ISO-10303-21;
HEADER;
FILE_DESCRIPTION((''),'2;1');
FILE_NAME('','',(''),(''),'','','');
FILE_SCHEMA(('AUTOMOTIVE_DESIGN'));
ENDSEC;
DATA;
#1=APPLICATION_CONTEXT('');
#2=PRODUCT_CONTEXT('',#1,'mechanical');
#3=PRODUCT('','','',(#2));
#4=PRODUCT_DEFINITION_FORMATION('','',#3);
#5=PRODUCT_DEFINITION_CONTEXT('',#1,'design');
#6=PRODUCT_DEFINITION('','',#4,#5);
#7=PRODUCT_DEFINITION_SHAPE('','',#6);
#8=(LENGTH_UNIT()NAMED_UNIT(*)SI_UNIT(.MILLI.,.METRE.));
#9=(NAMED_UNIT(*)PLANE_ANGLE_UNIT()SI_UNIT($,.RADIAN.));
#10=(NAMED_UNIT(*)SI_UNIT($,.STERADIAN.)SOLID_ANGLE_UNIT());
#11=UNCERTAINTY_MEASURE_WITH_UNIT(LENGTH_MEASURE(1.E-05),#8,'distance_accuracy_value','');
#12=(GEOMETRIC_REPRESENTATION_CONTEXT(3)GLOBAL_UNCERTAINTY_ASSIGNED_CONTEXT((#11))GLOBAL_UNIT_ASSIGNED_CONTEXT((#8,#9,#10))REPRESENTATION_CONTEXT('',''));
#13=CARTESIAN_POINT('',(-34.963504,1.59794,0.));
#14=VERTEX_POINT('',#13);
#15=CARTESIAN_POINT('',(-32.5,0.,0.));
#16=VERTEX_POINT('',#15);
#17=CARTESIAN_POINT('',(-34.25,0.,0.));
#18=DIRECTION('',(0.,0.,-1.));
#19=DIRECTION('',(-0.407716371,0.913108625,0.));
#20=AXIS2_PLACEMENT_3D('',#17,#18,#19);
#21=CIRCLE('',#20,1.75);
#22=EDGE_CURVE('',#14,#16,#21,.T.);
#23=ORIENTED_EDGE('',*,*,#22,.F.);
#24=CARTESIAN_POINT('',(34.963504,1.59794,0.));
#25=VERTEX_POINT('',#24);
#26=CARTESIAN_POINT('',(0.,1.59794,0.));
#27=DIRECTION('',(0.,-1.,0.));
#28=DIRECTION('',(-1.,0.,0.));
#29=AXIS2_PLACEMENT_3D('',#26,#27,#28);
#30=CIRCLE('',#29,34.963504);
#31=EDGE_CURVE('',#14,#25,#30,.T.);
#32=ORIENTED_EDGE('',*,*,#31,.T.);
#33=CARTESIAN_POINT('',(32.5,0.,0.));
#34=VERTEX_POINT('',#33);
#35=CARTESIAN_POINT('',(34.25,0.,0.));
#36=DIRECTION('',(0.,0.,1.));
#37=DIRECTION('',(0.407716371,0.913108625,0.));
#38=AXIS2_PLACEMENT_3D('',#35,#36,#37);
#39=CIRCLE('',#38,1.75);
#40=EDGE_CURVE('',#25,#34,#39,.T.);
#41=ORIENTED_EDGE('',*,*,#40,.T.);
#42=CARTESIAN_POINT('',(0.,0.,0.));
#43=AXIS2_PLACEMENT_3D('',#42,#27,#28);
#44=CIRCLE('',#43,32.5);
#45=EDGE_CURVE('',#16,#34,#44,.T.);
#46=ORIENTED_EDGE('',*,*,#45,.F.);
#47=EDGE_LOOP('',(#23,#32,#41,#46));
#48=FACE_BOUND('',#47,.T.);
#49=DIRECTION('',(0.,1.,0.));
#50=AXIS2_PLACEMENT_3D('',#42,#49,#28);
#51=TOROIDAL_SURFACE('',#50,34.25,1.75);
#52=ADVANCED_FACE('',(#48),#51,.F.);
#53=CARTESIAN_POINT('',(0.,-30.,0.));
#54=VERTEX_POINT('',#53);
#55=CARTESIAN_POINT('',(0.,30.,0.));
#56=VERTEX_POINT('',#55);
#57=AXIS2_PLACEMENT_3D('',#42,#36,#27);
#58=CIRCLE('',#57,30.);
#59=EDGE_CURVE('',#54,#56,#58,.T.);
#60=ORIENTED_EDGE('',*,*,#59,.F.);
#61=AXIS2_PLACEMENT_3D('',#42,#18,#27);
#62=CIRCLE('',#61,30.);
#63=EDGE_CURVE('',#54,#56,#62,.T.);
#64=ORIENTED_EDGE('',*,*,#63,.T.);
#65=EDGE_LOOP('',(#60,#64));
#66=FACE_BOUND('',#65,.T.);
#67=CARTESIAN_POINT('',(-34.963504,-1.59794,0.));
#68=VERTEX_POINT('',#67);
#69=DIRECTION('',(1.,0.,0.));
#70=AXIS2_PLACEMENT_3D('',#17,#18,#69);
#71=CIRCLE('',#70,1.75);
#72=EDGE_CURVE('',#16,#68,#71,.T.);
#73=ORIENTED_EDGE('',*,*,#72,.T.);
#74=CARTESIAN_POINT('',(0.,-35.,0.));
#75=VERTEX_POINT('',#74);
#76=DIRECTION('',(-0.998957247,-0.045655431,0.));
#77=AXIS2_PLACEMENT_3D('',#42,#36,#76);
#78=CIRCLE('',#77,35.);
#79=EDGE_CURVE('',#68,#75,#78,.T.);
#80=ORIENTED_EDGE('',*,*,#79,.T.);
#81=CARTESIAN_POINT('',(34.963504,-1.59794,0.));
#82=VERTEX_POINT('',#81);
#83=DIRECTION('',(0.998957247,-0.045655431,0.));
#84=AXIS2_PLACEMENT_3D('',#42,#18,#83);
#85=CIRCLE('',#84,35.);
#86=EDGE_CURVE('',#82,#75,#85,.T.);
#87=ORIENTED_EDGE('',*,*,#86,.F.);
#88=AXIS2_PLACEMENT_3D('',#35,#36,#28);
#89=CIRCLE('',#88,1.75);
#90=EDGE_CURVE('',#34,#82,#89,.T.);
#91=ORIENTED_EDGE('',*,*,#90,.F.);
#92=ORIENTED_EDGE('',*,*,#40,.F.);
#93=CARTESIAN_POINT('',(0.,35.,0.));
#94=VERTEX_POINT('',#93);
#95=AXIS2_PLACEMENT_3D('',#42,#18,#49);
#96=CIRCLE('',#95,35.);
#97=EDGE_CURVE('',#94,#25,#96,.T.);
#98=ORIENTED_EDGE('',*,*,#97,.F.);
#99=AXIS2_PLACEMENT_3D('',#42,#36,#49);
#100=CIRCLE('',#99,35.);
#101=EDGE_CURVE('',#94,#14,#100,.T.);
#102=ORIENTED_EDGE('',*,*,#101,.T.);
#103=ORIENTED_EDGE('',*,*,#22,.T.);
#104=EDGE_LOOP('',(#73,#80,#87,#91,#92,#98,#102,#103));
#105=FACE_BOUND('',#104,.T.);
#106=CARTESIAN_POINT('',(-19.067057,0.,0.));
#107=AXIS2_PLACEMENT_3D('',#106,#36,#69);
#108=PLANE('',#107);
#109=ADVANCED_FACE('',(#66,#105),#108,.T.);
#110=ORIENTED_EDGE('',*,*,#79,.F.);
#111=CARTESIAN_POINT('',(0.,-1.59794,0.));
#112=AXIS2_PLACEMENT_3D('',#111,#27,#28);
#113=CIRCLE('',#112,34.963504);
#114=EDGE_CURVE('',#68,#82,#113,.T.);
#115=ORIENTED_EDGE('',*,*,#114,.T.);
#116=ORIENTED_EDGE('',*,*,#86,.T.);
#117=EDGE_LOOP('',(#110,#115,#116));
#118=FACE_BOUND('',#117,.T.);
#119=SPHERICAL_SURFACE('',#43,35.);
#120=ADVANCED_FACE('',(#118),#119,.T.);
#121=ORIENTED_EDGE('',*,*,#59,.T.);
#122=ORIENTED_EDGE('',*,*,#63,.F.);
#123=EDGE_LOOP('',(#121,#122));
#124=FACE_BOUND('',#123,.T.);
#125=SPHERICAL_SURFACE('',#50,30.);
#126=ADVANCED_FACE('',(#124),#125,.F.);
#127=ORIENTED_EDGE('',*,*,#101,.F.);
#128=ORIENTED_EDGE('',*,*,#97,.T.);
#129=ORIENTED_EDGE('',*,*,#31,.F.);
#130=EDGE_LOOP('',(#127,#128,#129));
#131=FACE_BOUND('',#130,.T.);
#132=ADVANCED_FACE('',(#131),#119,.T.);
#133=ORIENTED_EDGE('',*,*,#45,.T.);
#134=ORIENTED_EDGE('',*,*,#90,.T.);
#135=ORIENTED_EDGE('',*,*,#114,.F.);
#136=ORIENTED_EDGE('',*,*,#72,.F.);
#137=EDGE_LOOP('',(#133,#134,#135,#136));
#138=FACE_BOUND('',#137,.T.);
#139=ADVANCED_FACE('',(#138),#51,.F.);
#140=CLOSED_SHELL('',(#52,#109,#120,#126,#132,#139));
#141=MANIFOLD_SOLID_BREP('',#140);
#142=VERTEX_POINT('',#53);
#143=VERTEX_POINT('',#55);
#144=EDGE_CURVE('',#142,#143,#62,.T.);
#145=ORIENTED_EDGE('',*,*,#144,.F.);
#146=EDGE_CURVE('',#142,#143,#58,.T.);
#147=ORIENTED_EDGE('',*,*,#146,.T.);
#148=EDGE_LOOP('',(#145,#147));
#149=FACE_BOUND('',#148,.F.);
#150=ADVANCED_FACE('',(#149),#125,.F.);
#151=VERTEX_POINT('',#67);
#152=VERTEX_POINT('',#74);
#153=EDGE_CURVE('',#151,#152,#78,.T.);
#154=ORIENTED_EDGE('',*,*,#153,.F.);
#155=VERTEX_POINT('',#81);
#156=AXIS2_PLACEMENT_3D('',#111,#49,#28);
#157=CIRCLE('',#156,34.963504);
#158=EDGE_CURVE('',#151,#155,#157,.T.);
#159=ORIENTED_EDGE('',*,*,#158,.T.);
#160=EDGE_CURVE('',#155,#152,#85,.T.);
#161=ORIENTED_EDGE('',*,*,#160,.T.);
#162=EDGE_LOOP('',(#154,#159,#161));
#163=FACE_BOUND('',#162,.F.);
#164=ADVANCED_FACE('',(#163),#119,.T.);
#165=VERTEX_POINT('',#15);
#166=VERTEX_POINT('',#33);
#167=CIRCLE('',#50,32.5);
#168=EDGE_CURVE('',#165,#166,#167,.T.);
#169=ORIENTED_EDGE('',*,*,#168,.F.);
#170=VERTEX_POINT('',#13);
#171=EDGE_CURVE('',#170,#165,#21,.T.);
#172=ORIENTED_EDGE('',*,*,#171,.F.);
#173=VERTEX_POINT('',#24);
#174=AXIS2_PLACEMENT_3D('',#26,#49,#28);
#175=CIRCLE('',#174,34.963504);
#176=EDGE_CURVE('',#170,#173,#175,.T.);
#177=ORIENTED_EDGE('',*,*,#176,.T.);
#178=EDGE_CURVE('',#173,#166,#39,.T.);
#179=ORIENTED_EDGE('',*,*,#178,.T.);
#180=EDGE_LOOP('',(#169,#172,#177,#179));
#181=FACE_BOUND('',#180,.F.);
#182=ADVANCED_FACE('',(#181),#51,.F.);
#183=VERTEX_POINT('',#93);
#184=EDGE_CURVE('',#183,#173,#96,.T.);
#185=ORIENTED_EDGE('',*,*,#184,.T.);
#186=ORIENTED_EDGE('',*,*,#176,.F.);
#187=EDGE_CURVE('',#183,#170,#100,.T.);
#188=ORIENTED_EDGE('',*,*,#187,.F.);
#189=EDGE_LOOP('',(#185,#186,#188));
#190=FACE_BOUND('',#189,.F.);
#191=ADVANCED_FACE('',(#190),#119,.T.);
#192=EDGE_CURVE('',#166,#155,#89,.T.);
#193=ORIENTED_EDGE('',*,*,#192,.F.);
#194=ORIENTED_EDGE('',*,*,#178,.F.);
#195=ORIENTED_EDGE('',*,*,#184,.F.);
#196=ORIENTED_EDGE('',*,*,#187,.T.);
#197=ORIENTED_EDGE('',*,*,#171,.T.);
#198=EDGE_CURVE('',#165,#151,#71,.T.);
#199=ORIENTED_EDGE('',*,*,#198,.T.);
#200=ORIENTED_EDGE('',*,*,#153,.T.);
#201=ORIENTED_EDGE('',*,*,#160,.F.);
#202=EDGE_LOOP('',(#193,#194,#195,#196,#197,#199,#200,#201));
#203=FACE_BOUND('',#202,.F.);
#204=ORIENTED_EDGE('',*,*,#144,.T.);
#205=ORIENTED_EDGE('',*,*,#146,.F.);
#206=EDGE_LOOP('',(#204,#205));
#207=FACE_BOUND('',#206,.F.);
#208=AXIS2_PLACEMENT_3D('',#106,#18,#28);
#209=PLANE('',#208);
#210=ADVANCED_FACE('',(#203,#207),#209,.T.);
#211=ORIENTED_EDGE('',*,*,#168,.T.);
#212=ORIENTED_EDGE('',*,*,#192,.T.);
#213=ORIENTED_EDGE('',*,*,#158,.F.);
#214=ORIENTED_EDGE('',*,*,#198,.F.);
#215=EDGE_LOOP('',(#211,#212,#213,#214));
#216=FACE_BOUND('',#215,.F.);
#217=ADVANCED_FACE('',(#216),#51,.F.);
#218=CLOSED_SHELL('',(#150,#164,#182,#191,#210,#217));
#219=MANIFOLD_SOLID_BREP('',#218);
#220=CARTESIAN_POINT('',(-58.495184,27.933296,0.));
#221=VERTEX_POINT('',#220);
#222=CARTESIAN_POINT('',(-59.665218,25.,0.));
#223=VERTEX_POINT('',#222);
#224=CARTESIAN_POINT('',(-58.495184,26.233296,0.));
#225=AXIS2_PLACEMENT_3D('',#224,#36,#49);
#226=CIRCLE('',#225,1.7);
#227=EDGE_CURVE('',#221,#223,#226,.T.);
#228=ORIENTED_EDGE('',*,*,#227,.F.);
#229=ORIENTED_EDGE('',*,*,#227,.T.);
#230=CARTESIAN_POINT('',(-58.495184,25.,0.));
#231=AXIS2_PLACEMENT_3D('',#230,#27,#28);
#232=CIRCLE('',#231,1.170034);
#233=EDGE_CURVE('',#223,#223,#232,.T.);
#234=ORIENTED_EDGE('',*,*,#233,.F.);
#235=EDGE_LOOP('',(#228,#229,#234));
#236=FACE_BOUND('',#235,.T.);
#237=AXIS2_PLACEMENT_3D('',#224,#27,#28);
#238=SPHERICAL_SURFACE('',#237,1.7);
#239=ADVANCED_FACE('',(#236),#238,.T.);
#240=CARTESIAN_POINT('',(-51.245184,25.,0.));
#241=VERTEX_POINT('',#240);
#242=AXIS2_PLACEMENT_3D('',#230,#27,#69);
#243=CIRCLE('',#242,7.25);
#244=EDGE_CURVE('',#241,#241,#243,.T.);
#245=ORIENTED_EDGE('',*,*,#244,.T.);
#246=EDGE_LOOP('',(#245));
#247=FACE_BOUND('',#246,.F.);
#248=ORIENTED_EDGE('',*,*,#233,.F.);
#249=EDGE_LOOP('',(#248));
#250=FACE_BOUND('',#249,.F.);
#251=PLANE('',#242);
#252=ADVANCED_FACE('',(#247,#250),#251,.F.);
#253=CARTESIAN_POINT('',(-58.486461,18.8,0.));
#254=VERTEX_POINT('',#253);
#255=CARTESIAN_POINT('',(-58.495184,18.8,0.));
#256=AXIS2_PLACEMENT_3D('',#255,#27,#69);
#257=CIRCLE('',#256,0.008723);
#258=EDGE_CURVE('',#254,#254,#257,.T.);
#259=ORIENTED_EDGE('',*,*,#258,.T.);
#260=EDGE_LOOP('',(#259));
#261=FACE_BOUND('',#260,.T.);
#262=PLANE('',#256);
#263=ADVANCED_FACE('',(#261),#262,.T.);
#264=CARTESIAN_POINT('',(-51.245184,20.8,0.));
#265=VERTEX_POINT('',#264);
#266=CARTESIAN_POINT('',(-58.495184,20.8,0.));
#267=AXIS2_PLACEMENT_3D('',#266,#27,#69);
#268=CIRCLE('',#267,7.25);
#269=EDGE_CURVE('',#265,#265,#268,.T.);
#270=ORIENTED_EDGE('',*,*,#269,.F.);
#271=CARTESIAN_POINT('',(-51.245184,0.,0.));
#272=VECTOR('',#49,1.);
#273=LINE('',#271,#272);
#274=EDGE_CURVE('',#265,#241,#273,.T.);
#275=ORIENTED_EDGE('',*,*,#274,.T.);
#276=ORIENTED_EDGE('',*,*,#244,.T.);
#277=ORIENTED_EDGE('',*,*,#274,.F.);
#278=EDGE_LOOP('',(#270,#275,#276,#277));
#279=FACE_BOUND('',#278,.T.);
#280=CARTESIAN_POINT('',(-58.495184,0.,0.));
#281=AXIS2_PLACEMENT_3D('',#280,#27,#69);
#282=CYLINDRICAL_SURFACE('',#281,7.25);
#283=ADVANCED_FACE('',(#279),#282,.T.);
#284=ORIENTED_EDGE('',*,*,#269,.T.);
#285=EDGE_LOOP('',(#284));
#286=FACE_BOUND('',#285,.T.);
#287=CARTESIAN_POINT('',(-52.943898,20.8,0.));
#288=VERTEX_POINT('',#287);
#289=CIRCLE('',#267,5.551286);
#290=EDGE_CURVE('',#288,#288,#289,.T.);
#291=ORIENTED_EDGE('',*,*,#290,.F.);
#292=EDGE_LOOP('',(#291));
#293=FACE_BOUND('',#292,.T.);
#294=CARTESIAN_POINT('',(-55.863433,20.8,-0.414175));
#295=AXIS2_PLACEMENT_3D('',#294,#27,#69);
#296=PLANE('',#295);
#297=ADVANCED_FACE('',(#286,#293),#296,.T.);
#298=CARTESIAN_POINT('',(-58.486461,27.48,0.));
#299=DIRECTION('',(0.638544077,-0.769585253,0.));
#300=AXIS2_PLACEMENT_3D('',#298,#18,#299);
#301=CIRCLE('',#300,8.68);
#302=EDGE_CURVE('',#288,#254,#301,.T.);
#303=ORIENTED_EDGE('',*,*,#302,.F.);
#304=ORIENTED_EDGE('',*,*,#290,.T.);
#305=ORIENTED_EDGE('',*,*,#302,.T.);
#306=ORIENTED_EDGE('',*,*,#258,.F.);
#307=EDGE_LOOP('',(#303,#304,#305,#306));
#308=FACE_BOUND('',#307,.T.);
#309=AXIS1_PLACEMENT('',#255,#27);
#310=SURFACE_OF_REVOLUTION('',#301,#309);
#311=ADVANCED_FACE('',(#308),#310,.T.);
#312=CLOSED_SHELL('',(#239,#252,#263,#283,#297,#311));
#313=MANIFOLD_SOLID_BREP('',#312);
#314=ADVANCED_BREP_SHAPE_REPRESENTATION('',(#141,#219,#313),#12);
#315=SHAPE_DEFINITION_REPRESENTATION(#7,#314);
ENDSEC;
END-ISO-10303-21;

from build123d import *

# Parameters (mm, degrees)
F2_ANGLE  = 180
F5_R      = 7.25
F6_DEPTH  = 25
F8_W      = 26.5384614468
F8_H      = 20.0961548835
F9_DEPTH  = 20.8
F10_R     = 5.5512855598
F11_DEPTH = 2


# Not quite as in the source:
# - a fillet or chamfer that OpenCascade refuses, or shapes differently, is made with other operations: its cross-section is extruded or revolved along the edge and cut away or added


with BuildPart() as f2:
    # F0 (on Top) → F2 (revolve)
    with BuildSketch(Plane.XY):
        with BuildLine():
            Line((0, 30), (0, 35))
            ThreePointArc((0, 35), (-24.1771803229, 25.3073892694), (-34.9635036496, 1.5979400934))
            ThreePointArc((-34.9635036496, 1.5979400934), (-33.2976690142, 1.4681844889), (-32.5, 0))
            ThreePointArc((-32.5, 0), (-33.2976690142, -1.4681844889), (-34.9635036496, -1.5979400934))
            ThreePointArc((-34.9635036496, -1.5979400934), (-24.1771803229, -25.3073892694), (0, -35))
            Line((0, -35), (0, -30))
            ThreePointArc((0, -30), (-30, 0), (0, 30))
        make_face()
    revolve(axis=Axis((0, 0.055314973, 0), (0, -1, 0)), revolution_arc=F2_ANGLE)


with BuildPart() as f3_1:
    # F3: instance of F2
    add(f2.part.mirror(Plane.XY))


with BuildPart() as f6:
    # F5 (on Front) → F6 (new body)
    with BuildSketch(Plane.XZ):
        with Locations((-58.4951840291, 0)):
            Circle(F5_R)
    extrude(amount=-F6_DEPTH)

    # F4 (on Top) → F7 (revolve)
    with BuildSketch(Plane.XY):
        with BuildLine():
            Line((-58.4951840291, 24.5332963728), (-58.4951840291, 27.9332963728))
            ThreePointArc((-58.4951840291, 27.9332963728), (-60.1951840291, 26.2332963728), (-58.4951840291, 24.5332963728))
        make_face()
    revolve(axis=Axis((-58.4951840291, 26.2332963728, 0), (0, -1, 0)))

    # F8 (on Front) → F9 (cut)
    with BuildSketch(Plane.XZ):
        with Locations((-55.8634325862, -0.4141749814)):
            Rectangle(F8_W, F8_H)
    extrude(amount=-F9_DEPTH, mode=Mode.SUBTRACT)

    # F10 (on face) → F11 (join)
    with BuildSketch(Plane.XZ.offset(-20.8)):
        with Locations((-58.4951840291, 0)):
            Circle(F10_R)
    extrude(amount=F11_DEPTH)

    # F12: fillet of radius 8.68 on 1 edges, made by hand

    # F12_s1 → F12_t2 (revolve, cut)
    with BuildSketch(Plane.XY):
        with BuildLine():
            ThreePointArc((-52.9438984693, 20.8), (-55.540277081, 19.3152954738), (-58.4864610535, 18.8))
            Line((-58.4864610535, 18.8), (-52.9438984693, 18.8))
            Line((-52.9438984693, 18.8), (-52.9438984693, 20.8))
        make_face()
    revolve(axis=Axis((-58.4951840291, 18.8, 0), (0, -1, 0)), mode=Mode.SUBTRACT)


solid = Compound([f2.part, f3_1.part, f6.part])
